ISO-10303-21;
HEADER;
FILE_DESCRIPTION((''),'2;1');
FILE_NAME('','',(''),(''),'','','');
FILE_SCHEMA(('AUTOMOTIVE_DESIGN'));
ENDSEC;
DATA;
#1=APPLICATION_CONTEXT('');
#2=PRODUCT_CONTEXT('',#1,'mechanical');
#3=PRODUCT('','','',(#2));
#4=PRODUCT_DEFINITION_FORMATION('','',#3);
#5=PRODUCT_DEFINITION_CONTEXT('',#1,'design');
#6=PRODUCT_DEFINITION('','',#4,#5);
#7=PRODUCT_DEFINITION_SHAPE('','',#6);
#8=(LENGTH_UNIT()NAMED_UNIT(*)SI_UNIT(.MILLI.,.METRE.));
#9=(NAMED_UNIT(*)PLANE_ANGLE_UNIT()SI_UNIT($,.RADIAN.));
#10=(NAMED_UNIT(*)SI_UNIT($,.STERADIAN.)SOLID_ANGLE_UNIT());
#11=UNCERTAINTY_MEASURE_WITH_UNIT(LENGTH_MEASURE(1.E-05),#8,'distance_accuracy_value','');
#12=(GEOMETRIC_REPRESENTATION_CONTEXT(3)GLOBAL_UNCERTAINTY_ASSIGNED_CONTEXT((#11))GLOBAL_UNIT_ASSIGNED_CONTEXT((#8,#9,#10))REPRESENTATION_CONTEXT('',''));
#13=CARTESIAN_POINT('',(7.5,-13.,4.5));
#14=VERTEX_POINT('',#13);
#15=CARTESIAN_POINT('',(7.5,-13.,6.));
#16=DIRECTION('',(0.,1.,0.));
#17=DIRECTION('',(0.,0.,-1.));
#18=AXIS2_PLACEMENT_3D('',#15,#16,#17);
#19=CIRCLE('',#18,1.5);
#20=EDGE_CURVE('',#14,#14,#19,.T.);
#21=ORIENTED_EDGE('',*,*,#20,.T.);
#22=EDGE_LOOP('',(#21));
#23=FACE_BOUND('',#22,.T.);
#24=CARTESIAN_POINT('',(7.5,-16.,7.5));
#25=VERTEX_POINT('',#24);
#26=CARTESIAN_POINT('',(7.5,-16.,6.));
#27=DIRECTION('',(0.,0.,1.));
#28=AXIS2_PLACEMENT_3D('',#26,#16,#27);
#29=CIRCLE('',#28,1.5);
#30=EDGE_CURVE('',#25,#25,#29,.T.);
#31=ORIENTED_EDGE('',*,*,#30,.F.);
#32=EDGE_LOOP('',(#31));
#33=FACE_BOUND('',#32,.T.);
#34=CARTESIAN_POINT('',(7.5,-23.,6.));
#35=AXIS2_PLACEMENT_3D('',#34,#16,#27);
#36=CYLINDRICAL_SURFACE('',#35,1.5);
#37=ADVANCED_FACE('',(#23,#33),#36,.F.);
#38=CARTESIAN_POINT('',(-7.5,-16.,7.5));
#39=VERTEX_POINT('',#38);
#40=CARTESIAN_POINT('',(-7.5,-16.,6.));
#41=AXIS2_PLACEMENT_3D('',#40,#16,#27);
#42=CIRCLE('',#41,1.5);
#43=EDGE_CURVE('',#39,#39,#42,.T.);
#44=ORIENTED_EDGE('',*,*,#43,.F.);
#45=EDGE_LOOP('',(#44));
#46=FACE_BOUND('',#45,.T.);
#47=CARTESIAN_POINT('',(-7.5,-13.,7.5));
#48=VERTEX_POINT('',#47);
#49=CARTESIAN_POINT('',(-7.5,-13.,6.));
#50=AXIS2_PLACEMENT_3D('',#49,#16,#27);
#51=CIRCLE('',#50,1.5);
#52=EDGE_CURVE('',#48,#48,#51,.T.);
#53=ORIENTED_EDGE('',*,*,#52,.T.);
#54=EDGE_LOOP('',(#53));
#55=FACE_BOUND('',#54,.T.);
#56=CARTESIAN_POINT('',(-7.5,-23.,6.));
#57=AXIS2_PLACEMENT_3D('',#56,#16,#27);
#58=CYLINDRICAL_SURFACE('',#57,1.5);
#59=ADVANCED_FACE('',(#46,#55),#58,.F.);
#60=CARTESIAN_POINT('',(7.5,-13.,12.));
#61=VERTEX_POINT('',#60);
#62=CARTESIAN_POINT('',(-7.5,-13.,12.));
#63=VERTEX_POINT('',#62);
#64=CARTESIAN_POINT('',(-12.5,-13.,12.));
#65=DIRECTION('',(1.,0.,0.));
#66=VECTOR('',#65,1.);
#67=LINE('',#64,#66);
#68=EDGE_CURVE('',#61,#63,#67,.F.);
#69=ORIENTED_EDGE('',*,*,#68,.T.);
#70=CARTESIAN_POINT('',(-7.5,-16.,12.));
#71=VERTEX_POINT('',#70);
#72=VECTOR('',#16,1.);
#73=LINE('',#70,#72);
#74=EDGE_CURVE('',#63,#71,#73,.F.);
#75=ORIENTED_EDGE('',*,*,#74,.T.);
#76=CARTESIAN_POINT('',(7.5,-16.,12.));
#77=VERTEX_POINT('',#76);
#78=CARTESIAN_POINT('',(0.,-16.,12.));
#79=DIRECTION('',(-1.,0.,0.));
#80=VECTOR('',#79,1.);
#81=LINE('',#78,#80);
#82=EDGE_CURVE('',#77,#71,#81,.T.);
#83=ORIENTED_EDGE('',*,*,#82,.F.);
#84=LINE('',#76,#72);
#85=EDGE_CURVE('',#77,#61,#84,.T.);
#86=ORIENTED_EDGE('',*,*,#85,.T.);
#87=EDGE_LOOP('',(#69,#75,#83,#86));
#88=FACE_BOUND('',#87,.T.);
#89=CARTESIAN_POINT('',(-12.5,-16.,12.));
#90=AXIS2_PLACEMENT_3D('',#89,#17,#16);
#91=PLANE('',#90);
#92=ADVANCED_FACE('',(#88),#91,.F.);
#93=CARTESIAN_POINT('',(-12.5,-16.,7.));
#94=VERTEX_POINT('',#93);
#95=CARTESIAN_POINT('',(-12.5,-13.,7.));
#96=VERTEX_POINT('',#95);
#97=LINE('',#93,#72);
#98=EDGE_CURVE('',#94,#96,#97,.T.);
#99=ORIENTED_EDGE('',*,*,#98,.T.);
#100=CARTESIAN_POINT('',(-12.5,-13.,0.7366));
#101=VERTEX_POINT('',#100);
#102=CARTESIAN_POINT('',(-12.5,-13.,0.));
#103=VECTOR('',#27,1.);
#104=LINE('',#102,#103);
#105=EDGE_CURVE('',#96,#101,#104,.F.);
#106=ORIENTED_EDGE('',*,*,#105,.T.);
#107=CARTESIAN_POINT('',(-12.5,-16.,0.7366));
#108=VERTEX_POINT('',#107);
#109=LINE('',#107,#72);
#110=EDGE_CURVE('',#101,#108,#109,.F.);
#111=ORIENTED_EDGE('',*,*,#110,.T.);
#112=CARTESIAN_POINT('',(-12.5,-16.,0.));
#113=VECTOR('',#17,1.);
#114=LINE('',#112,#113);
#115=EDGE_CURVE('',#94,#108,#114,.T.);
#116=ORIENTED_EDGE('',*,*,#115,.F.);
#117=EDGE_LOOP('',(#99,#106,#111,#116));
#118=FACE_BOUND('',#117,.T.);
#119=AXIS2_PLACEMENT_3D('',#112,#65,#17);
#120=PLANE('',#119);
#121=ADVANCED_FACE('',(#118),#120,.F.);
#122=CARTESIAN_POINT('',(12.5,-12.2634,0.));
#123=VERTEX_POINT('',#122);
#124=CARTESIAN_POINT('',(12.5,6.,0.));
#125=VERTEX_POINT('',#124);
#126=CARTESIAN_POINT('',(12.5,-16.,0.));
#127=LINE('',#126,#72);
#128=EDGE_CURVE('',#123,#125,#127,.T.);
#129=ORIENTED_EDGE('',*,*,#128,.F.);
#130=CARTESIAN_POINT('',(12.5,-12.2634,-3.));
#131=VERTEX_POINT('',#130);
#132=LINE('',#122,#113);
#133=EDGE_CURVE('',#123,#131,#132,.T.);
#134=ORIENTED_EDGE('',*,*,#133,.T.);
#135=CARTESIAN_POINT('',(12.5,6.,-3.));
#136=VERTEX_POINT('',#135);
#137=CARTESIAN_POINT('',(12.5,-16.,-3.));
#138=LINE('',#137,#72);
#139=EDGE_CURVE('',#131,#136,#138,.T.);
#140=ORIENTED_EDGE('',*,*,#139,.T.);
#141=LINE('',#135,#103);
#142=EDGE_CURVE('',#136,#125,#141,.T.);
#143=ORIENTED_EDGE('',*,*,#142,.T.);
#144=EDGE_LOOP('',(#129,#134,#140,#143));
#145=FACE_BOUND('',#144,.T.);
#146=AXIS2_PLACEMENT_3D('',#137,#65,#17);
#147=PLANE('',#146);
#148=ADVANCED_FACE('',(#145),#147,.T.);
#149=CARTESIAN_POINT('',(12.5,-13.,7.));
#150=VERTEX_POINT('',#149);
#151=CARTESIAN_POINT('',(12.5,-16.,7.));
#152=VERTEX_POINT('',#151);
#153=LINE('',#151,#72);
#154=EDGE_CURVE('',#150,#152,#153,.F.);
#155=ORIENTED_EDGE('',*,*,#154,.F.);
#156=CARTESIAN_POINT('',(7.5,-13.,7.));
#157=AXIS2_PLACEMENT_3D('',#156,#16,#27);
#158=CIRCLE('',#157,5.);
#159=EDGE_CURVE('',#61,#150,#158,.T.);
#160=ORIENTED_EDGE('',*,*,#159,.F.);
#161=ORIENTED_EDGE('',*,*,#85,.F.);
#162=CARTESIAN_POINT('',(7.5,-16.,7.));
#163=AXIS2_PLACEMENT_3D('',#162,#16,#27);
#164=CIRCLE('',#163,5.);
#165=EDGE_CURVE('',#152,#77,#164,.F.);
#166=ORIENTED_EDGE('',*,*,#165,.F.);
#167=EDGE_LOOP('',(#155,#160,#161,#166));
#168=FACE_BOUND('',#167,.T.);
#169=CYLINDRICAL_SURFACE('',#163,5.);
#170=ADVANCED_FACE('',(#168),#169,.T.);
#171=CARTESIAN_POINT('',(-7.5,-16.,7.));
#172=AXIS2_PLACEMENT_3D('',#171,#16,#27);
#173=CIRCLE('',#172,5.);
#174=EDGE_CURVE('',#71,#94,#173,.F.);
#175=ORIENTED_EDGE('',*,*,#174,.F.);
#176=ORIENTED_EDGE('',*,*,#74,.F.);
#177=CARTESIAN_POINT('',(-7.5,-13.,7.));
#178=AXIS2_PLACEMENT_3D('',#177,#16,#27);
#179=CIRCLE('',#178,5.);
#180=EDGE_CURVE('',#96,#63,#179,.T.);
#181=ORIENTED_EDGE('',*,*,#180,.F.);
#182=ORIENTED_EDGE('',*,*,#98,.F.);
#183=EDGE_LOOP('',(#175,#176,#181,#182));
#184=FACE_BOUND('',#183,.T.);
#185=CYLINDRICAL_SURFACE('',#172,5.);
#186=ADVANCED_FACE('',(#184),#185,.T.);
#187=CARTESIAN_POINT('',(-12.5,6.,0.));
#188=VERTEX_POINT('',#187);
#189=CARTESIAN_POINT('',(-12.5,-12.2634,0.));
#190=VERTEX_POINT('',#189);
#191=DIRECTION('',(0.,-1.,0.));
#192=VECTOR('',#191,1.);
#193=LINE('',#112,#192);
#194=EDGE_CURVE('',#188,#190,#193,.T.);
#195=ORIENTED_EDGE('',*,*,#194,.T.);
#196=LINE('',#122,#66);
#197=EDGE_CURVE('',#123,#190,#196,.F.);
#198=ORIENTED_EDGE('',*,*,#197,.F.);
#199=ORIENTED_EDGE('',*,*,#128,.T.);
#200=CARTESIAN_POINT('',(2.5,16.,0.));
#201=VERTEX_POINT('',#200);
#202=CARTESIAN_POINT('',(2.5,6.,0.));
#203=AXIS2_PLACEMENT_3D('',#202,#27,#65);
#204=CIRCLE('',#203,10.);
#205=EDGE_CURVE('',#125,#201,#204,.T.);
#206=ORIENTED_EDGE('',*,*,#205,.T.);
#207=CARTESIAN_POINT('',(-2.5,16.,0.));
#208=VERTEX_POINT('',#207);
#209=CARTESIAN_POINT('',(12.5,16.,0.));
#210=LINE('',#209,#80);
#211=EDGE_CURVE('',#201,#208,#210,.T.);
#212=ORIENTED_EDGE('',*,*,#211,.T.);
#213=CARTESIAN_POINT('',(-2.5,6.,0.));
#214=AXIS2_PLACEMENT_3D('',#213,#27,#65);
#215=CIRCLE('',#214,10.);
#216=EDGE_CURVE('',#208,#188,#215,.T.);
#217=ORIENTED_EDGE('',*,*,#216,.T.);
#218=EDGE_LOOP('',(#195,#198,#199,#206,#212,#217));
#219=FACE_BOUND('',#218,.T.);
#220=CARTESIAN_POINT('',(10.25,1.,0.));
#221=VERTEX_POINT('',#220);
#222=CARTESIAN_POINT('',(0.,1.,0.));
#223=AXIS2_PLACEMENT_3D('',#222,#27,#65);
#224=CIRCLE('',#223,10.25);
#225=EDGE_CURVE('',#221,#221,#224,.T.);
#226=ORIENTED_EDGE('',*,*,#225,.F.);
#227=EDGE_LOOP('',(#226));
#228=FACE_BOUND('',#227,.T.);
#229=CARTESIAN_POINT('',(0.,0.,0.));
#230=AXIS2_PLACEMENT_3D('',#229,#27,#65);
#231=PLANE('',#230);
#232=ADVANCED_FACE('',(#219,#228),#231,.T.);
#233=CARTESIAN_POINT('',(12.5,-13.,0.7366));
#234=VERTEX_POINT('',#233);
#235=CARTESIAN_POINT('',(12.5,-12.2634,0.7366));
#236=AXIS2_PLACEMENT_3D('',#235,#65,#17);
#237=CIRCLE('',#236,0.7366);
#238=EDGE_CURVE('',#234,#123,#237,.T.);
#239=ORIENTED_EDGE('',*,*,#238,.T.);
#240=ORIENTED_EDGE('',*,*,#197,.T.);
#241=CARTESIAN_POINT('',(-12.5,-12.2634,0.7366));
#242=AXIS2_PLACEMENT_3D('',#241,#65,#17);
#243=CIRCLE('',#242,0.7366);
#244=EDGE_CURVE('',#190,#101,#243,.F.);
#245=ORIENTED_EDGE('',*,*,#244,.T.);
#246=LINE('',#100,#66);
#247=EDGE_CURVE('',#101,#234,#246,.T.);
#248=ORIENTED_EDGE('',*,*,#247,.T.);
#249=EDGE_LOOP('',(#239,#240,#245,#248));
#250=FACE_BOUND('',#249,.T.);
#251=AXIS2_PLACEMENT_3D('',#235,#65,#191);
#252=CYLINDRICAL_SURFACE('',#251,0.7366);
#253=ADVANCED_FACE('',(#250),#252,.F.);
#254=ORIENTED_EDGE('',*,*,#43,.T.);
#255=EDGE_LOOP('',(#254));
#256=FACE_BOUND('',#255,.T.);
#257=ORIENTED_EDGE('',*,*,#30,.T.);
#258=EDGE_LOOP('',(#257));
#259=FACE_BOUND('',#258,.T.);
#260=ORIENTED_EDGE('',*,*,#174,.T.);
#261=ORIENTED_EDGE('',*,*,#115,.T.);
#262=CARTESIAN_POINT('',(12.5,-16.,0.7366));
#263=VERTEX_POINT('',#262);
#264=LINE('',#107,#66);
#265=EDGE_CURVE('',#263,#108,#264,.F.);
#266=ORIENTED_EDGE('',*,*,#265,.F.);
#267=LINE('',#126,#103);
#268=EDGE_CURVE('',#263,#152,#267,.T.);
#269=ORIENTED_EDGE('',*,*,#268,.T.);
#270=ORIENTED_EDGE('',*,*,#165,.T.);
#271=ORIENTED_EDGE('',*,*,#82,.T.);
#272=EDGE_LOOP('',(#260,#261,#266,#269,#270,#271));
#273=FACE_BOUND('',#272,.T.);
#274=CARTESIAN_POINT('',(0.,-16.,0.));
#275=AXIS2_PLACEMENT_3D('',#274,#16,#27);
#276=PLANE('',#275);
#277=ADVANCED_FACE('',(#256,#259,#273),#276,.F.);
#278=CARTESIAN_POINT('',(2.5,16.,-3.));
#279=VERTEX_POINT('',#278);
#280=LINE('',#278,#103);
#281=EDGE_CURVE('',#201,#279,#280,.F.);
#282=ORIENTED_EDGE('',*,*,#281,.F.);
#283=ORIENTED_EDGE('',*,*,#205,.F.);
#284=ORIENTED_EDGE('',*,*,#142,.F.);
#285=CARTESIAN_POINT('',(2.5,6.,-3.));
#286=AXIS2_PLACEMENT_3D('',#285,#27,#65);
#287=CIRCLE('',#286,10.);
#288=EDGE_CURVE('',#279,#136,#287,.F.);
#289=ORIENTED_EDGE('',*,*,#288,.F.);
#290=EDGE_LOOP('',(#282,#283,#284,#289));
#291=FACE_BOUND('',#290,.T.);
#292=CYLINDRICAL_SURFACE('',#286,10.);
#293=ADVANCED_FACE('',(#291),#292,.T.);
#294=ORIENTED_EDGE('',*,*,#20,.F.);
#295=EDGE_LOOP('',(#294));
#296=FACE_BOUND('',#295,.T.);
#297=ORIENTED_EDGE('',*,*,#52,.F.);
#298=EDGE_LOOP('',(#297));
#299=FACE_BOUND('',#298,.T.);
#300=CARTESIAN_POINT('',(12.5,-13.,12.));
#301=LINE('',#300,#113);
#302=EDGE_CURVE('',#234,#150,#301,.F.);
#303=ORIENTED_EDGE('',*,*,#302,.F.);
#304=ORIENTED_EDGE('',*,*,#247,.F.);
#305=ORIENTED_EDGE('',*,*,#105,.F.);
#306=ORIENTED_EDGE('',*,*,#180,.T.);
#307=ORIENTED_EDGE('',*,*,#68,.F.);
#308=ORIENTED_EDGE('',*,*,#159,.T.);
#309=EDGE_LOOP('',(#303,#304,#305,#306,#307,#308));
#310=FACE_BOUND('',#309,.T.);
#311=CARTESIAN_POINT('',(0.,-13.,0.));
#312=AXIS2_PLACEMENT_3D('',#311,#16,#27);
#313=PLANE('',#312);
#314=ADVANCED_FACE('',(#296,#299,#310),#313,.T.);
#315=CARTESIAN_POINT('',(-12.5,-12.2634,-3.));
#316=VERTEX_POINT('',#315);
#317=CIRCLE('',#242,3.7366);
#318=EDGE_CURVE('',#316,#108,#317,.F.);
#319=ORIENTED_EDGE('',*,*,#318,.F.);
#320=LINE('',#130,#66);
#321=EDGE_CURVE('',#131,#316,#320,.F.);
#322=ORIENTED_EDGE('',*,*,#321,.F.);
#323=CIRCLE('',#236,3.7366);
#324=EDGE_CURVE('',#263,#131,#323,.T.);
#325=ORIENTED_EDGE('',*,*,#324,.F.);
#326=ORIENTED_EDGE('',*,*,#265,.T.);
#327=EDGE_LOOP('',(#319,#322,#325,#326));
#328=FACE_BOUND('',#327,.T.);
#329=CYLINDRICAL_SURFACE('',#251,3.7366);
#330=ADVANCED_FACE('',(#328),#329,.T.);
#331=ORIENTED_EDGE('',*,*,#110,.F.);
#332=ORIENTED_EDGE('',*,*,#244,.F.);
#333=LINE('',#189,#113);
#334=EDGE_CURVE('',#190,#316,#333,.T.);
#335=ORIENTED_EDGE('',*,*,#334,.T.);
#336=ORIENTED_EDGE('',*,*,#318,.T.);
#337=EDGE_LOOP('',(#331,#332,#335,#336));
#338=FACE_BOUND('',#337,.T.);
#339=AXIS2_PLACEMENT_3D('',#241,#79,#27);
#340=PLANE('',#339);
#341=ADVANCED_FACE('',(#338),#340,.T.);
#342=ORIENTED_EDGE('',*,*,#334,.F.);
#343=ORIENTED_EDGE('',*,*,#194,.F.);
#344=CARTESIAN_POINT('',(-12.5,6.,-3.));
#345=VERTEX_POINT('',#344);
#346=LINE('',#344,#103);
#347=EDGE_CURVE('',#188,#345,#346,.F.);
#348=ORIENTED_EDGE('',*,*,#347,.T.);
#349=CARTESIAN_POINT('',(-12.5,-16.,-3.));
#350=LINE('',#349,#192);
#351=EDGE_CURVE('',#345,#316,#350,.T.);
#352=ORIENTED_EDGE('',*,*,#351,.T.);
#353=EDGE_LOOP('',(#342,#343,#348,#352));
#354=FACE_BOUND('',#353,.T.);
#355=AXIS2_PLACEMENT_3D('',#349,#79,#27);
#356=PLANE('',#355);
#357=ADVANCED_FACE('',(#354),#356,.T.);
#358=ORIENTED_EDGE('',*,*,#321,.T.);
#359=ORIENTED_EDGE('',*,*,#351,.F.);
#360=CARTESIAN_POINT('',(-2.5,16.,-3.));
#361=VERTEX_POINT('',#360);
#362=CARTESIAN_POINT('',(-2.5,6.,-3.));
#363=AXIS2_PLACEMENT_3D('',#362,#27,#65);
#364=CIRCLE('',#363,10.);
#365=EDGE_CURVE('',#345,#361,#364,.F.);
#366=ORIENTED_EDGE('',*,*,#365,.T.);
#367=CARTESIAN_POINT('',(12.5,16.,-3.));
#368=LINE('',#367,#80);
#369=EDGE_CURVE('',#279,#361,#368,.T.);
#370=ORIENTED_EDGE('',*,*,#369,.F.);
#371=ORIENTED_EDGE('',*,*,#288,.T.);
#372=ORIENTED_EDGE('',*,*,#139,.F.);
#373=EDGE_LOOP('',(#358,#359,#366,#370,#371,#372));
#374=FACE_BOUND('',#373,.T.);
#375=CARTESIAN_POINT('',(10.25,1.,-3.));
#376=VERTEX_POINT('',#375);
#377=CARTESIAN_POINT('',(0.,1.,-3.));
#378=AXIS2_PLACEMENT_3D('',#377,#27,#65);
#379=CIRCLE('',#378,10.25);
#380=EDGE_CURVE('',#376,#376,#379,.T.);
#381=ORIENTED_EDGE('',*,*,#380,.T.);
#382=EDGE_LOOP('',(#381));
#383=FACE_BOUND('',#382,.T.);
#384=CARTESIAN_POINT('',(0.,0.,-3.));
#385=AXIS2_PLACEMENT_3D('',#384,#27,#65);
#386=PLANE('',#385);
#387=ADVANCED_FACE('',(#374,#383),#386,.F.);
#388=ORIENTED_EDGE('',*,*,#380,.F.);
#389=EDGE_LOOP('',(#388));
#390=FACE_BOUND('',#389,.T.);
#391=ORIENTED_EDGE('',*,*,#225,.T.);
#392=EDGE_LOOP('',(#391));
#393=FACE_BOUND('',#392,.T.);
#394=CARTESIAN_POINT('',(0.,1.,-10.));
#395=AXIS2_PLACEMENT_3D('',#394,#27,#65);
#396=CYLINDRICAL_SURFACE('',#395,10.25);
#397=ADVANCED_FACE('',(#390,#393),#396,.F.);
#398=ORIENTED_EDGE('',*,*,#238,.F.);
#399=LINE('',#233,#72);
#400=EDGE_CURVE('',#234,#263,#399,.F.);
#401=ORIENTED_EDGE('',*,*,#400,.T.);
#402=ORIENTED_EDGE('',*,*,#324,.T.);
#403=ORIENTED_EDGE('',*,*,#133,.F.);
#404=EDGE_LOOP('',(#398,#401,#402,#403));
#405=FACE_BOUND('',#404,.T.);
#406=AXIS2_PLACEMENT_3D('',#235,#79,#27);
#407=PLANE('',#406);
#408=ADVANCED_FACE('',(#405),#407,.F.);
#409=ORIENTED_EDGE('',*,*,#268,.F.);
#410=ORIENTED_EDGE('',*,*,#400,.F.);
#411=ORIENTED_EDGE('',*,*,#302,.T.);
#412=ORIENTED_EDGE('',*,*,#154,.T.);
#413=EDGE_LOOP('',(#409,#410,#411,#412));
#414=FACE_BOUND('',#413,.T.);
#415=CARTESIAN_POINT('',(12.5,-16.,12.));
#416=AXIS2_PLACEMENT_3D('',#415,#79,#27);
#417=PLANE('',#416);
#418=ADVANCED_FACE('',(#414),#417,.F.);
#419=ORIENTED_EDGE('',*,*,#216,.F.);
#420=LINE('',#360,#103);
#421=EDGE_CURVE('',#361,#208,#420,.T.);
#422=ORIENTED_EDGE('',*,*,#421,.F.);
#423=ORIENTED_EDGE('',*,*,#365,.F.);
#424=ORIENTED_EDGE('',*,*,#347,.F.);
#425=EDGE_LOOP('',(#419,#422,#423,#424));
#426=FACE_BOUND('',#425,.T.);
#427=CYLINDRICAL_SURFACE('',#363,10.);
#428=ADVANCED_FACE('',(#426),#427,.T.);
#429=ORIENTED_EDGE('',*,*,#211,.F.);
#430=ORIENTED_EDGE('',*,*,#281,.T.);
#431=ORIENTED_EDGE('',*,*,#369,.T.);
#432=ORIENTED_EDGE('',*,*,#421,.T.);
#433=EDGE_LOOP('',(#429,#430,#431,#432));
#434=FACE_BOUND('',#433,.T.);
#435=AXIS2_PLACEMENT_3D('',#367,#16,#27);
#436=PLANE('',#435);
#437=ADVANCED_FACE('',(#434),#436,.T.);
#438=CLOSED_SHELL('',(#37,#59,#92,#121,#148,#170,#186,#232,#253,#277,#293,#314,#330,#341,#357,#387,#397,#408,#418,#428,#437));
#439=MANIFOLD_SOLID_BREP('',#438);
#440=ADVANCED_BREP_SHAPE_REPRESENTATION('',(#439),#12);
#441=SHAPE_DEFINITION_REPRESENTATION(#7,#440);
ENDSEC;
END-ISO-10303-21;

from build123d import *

# Parameters (mm, degrees)
SKETCH_1_W                       = 25
SKETCH_1_H                       = 32
SM_BASE_FLANGE_1_DEPTH           = 3
SM_EDGE_FLANGE_1_STRIP_W         = 13.4732
SM_EDGE_FLANGE_1_STRIP_H         = 3
SM_EDGE_FLANGE_1_STRIP_CUT_DEPTH = 25
SM_EDGE_FLANGE_1_DEPTH           = 25
SKETCH_13_R                      = 10.25
CUT_EXTRUDE_1_DEPTH              = 10
SKETCH_15_R                      = 1.5
CUT_EXTRUDE_2_DEPTH              = 10
FILLET_1_R                       = 10
FILLET_2_R                       = 5


# Sheet-metal steps are written as plain solids
with BuildPart() as part:
    # Sketch 1 → 基体-法兰1 (new body)
    with BuildSketch(Plane.XY):
        Rectangle(SKETCH_1_W, SKETCH_1_H)
    extrude(amount=-SM_BASE_FLANGE_1_DEPTH)

    # 边线-法兰1 strip (across the edge) → 边线-法兰1 strip cut (cut)
    with BuildSketch(Plane(origin=(-12.5, -16, 0), x_dir=(0, 1, 0), z_dir=(1, 0, 0))):
        with Locations((-3, -1.5)):
            Rectangle(SM_EDGE_FLANGE_1_STRIP_W, SM_EDGE_FLANGE_1_STRIP_H)
    extrude(amount=SM_EDGE_FLANGE_1_STRIP_CUT_DEPTH, mode=Mode.SUBTRACT)

    # 边线-法兰1 section (across the edge) → 边线-法兰1 (add)
    with BuildSketch(Plane(origin=(-12.5, -16, 0), x_dir=(0, 1, 0), z_dir=(1, 0, 0))):
        with BuildLine():
            Line((0, 0.7366), (0, 12))
            Line((0, 12), (3, 12))
            Line((3, 12), (3, 0.7366))
            ThreePointArc((3, 0.7366), (3.215745145, 0.215745145), (3.7366, 0))
            Line((3.7366, 0), (3.7366, -3))
            ThreePointArc((3.7366, -3), (1.094424801, -1.905575199), (0, 0.7366))
        make_face()
    extrude(amount=SM_EDGE_FLANGE_1_DEPTH)

    # 草图13 → 切除-拉伸1 (cut)
    with BuildSketch(Plane.XY):
        with Locations((0, 1)):
            Circle(SKETCH_13_R)
    extrude(amount=-CUT_EXTRUDE_1_DEPTH, mode=Mode.SUBTRACT)

    # 草图15 → 切除-拉伸2 (cut)
    with BuildSketch(Plane(origin=(0, -13, 0), x_dir=(1, 0, 0), z_dir=(0, 1, 0))):
        with Locations(Location((-7.5, -6, 0), (0, 0, 270))):
            Circle(SKETCH_15_R)
        with Locations(Location((7.5, -6, 0), (0, 0, 270))):
            Circle(SKETCH_15_R)
    extrude(amount=-CUT_EXTRUDE_2_DEPTH, mode=Mode.SUBTRACT)

    # 圆角1
    fillet_1_edges = [part.edges().sort_by_distance(p)[0] for p in [
        (-12.5, 16, -1.5),
        (12.5, 16, -1.5),
    ]]
    fillet(fillet_1_edges, radius=FILLET_1_R)

    # 圆角2
    fillet_2_edges = [part.edges().sort_by_distance(p)[0] for p in [
        (-12.5, -14.5, 12),
        (12.5, -14.5, 12),
    ]]
    fillet(fillet_2_edges, radius=FILLET_2_R)


solid = part.part
